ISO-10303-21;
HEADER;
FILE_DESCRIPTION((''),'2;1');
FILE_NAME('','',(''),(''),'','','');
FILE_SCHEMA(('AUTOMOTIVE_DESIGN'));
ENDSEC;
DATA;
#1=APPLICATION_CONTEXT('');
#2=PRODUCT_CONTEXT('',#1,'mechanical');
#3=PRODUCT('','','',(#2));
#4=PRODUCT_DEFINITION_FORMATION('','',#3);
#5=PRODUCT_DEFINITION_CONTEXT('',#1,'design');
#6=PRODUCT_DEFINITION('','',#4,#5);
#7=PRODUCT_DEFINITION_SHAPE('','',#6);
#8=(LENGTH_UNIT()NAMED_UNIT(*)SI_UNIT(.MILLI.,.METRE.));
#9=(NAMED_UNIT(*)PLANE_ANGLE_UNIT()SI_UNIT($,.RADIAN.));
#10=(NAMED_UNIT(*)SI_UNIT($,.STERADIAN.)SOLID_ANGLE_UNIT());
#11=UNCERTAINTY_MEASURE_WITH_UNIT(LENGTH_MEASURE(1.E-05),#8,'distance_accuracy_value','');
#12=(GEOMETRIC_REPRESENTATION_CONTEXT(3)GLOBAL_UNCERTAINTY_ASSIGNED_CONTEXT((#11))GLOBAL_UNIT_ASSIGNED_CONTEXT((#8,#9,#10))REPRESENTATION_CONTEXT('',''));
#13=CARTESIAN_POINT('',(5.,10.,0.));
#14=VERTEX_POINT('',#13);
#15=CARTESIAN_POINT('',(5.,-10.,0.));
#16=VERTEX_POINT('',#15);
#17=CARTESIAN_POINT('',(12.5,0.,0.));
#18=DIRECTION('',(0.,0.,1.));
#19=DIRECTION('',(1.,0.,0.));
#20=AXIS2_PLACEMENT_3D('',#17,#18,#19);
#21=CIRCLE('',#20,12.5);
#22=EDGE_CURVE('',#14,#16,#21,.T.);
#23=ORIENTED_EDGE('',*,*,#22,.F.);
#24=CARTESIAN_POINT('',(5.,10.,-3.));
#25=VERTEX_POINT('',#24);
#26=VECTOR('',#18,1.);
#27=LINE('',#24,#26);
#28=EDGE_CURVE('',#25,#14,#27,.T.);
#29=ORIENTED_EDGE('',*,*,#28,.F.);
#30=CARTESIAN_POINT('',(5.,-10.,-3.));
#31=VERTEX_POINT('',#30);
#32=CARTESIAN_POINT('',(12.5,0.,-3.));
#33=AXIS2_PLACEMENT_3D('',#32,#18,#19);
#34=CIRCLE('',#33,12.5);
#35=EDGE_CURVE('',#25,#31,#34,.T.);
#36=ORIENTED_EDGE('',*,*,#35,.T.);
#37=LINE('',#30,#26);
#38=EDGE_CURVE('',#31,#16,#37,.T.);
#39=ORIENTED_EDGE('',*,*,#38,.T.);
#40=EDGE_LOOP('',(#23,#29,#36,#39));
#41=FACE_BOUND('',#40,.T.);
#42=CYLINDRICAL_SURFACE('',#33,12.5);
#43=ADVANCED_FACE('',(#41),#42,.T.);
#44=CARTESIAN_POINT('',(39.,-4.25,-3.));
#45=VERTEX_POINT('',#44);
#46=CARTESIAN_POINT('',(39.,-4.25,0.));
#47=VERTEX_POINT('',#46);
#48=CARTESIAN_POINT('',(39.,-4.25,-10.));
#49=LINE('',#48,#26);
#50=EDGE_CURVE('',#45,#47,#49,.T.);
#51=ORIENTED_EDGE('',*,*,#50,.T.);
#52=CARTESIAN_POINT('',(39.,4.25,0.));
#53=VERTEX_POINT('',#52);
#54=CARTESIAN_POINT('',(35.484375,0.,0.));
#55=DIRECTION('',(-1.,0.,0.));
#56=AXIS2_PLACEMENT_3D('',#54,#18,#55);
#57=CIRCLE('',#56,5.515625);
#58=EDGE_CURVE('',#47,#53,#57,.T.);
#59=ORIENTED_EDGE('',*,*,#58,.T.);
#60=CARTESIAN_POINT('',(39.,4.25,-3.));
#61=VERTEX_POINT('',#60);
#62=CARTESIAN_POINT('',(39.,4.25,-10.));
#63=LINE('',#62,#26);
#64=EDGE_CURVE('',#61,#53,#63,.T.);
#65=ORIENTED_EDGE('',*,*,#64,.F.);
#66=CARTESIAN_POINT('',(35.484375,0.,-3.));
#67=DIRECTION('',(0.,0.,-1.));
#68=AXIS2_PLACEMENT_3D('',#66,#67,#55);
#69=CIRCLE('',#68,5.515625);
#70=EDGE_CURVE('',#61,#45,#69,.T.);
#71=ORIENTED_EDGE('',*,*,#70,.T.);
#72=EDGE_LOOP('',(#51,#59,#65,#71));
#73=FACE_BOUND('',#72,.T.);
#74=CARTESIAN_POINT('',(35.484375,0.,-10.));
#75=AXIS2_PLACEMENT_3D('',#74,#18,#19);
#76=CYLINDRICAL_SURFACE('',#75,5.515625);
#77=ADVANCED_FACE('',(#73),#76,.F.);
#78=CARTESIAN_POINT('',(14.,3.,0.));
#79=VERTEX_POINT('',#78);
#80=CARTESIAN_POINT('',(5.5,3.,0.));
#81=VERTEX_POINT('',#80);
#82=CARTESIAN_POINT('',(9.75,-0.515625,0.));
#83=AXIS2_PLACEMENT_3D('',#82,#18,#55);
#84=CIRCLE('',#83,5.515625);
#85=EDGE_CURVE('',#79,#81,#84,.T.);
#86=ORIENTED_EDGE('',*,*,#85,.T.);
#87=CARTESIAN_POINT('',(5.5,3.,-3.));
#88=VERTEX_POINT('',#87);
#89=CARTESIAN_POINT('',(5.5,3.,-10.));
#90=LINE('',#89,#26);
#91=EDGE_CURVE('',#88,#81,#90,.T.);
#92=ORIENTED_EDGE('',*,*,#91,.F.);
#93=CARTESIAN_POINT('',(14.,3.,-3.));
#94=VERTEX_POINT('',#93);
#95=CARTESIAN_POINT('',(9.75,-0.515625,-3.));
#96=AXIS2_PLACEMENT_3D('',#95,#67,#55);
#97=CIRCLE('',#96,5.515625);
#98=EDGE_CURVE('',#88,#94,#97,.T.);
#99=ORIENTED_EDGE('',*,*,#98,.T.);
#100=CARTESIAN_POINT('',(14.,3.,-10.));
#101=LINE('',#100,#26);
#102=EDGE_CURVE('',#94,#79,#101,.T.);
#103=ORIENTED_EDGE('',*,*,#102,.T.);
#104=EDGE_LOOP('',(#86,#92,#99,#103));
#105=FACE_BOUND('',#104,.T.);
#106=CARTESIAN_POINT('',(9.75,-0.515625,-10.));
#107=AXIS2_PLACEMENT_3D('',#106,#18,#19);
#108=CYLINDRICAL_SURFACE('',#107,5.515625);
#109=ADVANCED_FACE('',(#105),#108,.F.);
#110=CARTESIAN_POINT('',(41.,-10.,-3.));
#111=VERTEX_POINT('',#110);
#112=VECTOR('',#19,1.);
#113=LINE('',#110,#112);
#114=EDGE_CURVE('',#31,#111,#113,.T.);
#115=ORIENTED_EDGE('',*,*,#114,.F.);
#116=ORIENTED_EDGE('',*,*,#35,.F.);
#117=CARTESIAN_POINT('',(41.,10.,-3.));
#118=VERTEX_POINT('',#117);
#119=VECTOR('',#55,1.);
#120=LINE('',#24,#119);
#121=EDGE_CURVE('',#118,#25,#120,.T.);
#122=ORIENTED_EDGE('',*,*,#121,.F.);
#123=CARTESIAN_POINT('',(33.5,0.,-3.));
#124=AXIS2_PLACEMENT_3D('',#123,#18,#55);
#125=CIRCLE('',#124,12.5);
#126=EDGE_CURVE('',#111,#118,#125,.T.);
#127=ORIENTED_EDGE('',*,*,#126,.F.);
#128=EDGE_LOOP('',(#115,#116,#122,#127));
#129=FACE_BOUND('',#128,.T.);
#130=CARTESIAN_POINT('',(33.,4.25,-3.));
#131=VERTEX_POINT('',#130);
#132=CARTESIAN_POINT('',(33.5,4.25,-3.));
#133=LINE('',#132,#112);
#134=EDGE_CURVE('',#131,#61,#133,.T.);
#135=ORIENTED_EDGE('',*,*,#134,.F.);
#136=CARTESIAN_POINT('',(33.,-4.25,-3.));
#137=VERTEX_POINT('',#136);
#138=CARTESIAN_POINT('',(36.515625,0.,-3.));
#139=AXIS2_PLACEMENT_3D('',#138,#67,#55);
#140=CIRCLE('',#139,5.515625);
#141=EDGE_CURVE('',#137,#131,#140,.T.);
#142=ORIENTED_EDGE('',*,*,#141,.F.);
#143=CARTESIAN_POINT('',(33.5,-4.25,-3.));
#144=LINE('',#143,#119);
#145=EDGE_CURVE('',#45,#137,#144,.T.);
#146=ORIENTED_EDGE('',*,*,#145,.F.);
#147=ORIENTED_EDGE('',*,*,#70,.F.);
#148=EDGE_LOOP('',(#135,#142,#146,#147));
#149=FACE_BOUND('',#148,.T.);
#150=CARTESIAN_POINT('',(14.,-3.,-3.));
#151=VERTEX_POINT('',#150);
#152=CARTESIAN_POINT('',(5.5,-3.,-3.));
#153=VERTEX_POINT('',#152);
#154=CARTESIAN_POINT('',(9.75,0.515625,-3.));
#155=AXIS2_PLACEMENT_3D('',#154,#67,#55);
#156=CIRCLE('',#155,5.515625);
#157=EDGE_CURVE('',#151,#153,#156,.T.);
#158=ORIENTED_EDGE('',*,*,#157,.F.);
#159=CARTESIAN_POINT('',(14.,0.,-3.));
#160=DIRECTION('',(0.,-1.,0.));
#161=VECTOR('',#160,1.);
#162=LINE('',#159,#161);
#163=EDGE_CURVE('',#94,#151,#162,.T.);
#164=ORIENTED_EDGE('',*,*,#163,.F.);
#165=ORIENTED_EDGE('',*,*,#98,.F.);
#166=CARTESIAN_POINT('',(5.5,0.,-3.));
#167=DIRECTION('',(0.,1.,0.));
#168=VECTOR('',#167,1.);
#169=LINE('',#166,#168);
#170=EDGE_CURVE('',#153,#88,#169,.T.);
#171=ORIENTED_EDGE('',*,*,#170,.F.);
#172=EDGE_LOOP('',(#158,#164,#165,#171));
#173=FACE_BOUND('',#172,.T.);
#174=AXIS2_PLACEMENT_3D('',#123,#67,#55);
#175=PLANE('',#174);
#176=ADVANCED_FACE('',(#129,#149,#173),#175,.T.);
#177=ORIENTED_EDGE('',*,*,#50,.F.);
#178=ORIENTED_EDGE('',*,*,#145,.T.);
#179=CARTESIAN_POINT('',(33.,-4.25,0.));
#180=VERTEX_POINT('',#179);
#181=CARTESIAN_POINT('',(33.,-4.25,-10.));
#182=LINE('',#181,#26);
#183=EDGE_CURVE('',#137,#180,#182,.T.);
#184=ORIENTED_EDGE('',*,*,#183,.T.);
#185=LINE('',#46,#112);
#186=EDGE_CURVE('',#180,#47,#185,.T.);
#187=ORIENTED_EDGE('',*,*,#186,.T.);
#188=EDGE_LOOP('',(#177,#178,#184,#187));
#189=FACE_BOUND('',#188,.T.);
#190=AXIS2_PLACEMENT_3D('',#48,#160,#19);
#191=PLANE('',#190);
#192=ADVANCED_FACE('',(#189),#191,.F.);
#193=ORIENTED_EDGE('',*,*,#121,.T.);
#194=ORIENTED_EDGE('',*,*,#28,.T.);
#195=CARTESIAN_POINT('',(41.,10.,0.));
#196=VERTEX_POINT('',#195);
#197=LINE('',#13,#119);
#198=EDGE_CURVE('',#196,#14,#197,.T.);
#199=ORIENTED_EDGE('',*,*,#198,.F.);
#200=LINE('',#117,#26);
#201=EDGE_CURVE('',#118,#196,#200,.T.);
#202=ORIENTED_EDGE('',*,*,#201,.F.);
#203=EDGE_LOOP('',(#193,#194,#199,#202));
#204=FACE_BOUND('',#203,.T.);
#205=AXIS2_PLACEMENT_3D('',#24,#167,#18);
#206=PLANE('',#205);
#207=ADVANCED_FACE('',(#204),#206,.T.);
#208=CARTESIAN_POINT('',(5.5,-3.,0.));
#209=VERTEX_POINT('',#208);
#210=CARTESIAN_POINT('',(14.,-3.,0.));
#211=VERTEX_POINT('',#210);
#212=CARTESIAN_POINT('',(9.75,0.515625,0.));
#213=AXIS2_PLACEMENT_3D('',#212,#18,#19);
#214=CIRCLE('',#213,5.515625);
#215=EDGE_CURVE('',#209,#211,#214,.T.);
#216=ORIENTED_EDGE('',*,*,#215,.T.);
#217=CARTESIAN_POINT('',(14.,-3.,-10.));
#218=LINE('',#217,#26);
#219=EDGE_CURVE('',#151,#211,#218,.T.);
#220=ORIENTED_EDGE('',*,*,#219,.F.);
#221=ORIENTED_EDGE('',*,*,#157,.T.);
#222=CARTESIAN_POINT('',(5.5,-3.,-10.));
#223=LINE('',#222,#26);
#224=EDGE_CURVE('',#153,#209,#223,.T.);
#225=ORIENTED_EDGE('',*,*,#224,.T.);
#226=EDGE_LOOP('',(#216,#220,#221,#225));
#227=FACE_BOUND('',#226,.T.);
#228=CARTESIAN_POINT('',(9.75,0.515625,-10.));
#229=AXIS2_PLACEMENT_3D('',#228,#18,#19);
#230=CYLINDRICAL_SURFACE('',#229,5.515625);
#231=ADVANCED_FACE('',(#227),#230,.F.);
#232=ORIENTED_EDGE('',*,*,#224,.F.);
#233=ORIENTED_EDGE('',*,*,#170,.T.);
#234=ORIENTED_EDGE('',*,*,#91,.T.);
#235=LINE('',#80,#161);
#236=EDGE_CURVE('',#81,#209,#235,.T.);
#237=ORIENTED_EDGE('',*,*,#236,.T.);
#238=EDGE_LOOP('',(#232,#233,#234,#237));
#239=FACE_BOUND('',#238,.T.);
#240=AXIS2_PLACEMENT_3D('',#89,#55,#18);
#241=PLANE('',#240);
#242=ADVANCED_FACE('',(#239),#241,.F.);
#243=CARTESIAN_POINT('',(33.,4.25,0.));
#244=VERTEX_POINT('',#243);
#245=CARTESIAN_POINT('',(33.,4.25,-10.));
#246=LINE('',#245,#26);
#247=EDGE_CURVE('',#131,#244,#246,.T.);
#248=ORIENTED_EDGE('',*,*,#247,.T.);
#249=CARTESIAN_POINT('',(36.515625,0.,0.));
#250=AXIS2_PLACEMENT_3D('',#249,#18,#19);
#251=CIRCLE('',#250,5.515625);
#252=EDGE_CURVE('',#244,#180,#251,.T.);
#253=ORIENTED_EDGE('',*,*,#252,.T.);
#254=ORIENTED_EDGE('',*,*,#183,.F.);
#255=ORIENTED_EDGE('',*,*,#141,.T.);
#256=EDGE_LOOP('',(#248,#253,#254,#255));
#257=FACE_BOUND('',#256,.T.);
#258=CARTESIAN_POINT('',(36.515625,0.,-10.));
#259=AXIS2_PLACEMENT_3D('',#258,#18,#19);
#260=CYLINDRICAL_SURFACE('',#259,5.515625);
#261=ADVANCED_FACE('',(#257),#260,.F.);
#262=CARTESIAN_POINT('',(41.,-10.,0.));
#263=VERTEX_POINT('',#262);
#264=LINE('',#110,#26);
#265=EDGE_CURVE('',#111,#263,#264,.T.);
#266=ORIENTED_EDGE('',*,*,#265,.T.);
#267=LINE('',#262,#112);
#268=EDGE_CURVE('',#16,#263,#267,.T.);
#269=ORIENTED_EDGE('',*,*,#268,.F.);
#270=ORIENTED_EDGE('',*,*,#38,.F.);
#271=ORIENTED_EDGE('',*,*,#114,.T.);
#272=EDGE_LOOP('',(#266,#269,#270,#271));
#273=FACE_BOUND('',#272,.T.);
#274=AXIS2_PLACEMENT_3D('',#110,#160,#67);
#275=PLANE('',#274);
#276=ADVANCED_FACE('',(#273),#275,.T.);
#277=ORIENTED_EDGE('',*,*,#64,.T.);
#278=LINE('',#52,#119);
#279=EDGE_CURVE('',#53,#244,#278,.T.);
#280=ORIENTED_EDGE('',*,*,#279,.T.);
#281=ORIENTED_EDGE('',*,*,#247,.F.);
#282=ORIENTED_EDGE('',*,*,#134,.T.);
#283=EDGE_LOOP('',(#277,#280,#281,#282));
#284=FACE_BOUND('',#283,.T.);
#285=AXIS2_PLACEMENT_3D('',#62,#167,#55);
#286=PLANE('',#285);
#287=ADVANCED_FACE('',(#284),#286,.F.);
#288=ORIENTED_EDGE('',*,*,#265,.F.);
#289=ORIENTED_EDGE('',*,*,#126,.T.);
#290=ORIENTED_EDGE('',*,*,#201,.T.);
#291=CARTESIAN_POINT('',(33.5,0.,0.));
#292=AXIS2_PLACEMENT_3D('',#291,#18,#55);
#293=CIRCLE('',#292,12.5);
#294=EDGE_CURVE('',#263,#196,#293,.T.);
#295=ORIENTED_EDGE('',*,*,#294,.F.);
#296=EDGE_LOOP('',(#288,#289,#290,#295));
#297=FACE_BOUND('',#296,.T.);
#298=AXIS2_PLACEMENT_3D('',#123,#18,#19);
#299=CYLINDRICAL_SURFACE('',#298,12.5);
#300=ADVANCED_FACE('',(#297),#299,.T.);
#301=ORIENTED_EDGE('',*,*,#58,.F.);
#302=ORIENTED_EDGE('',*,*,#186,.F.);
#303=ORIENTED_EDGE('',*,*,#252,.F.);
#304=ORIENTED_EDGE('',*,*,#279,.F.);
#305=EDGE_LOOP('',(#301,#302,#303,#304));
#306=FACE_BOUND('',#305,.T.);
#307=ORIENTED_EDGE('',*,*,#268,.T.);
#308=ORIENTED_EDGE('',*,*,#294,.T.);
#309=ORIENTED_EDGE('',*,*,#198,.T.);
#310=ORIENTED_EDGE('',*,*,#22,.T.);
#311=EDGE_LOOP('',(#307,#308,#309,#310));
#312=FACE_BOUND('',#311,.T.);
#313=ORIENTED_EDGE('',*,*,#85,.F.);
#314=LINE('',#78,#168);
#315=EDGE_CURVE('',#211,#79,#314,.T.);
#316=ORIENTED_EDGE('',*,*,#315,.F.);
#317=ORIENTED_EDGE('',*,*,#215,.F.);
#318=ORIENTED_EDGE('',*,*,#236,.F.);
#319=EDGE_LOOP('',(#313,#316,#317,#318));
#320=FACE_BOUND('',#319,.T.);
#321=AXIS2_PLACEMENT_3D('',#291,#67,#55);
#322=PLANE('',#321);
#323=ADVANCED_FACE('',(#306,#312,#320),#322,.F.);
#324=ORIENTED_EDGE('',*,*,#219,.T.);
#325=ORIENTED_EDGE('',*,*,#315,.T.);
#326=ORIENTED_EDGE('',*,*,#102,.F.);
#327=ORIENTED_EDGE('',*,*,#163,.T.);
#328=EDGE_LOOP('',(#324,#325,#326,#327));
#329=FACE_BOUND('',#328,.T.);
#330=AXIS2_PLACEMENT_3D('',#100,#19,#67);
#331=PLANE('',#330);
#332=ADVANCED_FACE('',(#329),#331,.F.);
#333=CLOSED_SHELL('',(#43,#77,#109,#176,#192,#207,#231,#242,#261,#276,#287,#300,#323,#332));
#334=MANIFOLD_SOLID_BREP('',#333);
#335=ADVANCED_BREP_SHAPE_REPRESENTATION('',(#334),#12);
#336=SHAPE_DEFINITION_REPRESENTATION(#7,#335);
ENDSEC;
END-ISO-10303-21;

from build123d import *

# Parameters (mm, degrees)
BASE_FLANGE1_DEPTH = 3
CUT_EXTRUDE1_DEPTH = 10


# Sheet-metal steps are written as plain solids
with BuildPart() as part:
    # Sketch1 → Base-Flange1 (new body)
    with BuildSketch(Plane.XY):
        with BuildLine():
            Line((5, 10), (41, 10))
            ThreePointArc((41, 10), (46, 0), (41, -10))
            Line((41, -10), (5, -10))
            ThreePointArc((5, -10), (0, 0), (5, 10))
        make_face()
    extrude(amount=-BASE_FLANGE1_DEPTH)

    # Sketch4 → Cut-Extrude1 (cut)
    with BuildSketch(Plane.XY):
        with BuildLine():
            Line((5.5, 3), (5.5, -3))
            ThreePointArc((5.5, -3), (9.75, -5), (14, -3))
            Line((14, -3), (14, 3))
            ThreePointArc((14, 3), (9.75, 5), (5.5, 3))
        make_face()
        with BuildLine():
            Line((39, 4.25), (33, 4.25))
            ThreePointArc((33, 4.25), (31, 0), (33, -4.25))
            Line((33, -4.25), (39, -4.25))
            ThreePointArc((39, -4.25), (41, 0), (39, 4.25))
        make_face()
    extrude(amount=-CUT_EXTRUDE1_DEPTH, mode=Mode.SUBTRACT)


solid = part.part
